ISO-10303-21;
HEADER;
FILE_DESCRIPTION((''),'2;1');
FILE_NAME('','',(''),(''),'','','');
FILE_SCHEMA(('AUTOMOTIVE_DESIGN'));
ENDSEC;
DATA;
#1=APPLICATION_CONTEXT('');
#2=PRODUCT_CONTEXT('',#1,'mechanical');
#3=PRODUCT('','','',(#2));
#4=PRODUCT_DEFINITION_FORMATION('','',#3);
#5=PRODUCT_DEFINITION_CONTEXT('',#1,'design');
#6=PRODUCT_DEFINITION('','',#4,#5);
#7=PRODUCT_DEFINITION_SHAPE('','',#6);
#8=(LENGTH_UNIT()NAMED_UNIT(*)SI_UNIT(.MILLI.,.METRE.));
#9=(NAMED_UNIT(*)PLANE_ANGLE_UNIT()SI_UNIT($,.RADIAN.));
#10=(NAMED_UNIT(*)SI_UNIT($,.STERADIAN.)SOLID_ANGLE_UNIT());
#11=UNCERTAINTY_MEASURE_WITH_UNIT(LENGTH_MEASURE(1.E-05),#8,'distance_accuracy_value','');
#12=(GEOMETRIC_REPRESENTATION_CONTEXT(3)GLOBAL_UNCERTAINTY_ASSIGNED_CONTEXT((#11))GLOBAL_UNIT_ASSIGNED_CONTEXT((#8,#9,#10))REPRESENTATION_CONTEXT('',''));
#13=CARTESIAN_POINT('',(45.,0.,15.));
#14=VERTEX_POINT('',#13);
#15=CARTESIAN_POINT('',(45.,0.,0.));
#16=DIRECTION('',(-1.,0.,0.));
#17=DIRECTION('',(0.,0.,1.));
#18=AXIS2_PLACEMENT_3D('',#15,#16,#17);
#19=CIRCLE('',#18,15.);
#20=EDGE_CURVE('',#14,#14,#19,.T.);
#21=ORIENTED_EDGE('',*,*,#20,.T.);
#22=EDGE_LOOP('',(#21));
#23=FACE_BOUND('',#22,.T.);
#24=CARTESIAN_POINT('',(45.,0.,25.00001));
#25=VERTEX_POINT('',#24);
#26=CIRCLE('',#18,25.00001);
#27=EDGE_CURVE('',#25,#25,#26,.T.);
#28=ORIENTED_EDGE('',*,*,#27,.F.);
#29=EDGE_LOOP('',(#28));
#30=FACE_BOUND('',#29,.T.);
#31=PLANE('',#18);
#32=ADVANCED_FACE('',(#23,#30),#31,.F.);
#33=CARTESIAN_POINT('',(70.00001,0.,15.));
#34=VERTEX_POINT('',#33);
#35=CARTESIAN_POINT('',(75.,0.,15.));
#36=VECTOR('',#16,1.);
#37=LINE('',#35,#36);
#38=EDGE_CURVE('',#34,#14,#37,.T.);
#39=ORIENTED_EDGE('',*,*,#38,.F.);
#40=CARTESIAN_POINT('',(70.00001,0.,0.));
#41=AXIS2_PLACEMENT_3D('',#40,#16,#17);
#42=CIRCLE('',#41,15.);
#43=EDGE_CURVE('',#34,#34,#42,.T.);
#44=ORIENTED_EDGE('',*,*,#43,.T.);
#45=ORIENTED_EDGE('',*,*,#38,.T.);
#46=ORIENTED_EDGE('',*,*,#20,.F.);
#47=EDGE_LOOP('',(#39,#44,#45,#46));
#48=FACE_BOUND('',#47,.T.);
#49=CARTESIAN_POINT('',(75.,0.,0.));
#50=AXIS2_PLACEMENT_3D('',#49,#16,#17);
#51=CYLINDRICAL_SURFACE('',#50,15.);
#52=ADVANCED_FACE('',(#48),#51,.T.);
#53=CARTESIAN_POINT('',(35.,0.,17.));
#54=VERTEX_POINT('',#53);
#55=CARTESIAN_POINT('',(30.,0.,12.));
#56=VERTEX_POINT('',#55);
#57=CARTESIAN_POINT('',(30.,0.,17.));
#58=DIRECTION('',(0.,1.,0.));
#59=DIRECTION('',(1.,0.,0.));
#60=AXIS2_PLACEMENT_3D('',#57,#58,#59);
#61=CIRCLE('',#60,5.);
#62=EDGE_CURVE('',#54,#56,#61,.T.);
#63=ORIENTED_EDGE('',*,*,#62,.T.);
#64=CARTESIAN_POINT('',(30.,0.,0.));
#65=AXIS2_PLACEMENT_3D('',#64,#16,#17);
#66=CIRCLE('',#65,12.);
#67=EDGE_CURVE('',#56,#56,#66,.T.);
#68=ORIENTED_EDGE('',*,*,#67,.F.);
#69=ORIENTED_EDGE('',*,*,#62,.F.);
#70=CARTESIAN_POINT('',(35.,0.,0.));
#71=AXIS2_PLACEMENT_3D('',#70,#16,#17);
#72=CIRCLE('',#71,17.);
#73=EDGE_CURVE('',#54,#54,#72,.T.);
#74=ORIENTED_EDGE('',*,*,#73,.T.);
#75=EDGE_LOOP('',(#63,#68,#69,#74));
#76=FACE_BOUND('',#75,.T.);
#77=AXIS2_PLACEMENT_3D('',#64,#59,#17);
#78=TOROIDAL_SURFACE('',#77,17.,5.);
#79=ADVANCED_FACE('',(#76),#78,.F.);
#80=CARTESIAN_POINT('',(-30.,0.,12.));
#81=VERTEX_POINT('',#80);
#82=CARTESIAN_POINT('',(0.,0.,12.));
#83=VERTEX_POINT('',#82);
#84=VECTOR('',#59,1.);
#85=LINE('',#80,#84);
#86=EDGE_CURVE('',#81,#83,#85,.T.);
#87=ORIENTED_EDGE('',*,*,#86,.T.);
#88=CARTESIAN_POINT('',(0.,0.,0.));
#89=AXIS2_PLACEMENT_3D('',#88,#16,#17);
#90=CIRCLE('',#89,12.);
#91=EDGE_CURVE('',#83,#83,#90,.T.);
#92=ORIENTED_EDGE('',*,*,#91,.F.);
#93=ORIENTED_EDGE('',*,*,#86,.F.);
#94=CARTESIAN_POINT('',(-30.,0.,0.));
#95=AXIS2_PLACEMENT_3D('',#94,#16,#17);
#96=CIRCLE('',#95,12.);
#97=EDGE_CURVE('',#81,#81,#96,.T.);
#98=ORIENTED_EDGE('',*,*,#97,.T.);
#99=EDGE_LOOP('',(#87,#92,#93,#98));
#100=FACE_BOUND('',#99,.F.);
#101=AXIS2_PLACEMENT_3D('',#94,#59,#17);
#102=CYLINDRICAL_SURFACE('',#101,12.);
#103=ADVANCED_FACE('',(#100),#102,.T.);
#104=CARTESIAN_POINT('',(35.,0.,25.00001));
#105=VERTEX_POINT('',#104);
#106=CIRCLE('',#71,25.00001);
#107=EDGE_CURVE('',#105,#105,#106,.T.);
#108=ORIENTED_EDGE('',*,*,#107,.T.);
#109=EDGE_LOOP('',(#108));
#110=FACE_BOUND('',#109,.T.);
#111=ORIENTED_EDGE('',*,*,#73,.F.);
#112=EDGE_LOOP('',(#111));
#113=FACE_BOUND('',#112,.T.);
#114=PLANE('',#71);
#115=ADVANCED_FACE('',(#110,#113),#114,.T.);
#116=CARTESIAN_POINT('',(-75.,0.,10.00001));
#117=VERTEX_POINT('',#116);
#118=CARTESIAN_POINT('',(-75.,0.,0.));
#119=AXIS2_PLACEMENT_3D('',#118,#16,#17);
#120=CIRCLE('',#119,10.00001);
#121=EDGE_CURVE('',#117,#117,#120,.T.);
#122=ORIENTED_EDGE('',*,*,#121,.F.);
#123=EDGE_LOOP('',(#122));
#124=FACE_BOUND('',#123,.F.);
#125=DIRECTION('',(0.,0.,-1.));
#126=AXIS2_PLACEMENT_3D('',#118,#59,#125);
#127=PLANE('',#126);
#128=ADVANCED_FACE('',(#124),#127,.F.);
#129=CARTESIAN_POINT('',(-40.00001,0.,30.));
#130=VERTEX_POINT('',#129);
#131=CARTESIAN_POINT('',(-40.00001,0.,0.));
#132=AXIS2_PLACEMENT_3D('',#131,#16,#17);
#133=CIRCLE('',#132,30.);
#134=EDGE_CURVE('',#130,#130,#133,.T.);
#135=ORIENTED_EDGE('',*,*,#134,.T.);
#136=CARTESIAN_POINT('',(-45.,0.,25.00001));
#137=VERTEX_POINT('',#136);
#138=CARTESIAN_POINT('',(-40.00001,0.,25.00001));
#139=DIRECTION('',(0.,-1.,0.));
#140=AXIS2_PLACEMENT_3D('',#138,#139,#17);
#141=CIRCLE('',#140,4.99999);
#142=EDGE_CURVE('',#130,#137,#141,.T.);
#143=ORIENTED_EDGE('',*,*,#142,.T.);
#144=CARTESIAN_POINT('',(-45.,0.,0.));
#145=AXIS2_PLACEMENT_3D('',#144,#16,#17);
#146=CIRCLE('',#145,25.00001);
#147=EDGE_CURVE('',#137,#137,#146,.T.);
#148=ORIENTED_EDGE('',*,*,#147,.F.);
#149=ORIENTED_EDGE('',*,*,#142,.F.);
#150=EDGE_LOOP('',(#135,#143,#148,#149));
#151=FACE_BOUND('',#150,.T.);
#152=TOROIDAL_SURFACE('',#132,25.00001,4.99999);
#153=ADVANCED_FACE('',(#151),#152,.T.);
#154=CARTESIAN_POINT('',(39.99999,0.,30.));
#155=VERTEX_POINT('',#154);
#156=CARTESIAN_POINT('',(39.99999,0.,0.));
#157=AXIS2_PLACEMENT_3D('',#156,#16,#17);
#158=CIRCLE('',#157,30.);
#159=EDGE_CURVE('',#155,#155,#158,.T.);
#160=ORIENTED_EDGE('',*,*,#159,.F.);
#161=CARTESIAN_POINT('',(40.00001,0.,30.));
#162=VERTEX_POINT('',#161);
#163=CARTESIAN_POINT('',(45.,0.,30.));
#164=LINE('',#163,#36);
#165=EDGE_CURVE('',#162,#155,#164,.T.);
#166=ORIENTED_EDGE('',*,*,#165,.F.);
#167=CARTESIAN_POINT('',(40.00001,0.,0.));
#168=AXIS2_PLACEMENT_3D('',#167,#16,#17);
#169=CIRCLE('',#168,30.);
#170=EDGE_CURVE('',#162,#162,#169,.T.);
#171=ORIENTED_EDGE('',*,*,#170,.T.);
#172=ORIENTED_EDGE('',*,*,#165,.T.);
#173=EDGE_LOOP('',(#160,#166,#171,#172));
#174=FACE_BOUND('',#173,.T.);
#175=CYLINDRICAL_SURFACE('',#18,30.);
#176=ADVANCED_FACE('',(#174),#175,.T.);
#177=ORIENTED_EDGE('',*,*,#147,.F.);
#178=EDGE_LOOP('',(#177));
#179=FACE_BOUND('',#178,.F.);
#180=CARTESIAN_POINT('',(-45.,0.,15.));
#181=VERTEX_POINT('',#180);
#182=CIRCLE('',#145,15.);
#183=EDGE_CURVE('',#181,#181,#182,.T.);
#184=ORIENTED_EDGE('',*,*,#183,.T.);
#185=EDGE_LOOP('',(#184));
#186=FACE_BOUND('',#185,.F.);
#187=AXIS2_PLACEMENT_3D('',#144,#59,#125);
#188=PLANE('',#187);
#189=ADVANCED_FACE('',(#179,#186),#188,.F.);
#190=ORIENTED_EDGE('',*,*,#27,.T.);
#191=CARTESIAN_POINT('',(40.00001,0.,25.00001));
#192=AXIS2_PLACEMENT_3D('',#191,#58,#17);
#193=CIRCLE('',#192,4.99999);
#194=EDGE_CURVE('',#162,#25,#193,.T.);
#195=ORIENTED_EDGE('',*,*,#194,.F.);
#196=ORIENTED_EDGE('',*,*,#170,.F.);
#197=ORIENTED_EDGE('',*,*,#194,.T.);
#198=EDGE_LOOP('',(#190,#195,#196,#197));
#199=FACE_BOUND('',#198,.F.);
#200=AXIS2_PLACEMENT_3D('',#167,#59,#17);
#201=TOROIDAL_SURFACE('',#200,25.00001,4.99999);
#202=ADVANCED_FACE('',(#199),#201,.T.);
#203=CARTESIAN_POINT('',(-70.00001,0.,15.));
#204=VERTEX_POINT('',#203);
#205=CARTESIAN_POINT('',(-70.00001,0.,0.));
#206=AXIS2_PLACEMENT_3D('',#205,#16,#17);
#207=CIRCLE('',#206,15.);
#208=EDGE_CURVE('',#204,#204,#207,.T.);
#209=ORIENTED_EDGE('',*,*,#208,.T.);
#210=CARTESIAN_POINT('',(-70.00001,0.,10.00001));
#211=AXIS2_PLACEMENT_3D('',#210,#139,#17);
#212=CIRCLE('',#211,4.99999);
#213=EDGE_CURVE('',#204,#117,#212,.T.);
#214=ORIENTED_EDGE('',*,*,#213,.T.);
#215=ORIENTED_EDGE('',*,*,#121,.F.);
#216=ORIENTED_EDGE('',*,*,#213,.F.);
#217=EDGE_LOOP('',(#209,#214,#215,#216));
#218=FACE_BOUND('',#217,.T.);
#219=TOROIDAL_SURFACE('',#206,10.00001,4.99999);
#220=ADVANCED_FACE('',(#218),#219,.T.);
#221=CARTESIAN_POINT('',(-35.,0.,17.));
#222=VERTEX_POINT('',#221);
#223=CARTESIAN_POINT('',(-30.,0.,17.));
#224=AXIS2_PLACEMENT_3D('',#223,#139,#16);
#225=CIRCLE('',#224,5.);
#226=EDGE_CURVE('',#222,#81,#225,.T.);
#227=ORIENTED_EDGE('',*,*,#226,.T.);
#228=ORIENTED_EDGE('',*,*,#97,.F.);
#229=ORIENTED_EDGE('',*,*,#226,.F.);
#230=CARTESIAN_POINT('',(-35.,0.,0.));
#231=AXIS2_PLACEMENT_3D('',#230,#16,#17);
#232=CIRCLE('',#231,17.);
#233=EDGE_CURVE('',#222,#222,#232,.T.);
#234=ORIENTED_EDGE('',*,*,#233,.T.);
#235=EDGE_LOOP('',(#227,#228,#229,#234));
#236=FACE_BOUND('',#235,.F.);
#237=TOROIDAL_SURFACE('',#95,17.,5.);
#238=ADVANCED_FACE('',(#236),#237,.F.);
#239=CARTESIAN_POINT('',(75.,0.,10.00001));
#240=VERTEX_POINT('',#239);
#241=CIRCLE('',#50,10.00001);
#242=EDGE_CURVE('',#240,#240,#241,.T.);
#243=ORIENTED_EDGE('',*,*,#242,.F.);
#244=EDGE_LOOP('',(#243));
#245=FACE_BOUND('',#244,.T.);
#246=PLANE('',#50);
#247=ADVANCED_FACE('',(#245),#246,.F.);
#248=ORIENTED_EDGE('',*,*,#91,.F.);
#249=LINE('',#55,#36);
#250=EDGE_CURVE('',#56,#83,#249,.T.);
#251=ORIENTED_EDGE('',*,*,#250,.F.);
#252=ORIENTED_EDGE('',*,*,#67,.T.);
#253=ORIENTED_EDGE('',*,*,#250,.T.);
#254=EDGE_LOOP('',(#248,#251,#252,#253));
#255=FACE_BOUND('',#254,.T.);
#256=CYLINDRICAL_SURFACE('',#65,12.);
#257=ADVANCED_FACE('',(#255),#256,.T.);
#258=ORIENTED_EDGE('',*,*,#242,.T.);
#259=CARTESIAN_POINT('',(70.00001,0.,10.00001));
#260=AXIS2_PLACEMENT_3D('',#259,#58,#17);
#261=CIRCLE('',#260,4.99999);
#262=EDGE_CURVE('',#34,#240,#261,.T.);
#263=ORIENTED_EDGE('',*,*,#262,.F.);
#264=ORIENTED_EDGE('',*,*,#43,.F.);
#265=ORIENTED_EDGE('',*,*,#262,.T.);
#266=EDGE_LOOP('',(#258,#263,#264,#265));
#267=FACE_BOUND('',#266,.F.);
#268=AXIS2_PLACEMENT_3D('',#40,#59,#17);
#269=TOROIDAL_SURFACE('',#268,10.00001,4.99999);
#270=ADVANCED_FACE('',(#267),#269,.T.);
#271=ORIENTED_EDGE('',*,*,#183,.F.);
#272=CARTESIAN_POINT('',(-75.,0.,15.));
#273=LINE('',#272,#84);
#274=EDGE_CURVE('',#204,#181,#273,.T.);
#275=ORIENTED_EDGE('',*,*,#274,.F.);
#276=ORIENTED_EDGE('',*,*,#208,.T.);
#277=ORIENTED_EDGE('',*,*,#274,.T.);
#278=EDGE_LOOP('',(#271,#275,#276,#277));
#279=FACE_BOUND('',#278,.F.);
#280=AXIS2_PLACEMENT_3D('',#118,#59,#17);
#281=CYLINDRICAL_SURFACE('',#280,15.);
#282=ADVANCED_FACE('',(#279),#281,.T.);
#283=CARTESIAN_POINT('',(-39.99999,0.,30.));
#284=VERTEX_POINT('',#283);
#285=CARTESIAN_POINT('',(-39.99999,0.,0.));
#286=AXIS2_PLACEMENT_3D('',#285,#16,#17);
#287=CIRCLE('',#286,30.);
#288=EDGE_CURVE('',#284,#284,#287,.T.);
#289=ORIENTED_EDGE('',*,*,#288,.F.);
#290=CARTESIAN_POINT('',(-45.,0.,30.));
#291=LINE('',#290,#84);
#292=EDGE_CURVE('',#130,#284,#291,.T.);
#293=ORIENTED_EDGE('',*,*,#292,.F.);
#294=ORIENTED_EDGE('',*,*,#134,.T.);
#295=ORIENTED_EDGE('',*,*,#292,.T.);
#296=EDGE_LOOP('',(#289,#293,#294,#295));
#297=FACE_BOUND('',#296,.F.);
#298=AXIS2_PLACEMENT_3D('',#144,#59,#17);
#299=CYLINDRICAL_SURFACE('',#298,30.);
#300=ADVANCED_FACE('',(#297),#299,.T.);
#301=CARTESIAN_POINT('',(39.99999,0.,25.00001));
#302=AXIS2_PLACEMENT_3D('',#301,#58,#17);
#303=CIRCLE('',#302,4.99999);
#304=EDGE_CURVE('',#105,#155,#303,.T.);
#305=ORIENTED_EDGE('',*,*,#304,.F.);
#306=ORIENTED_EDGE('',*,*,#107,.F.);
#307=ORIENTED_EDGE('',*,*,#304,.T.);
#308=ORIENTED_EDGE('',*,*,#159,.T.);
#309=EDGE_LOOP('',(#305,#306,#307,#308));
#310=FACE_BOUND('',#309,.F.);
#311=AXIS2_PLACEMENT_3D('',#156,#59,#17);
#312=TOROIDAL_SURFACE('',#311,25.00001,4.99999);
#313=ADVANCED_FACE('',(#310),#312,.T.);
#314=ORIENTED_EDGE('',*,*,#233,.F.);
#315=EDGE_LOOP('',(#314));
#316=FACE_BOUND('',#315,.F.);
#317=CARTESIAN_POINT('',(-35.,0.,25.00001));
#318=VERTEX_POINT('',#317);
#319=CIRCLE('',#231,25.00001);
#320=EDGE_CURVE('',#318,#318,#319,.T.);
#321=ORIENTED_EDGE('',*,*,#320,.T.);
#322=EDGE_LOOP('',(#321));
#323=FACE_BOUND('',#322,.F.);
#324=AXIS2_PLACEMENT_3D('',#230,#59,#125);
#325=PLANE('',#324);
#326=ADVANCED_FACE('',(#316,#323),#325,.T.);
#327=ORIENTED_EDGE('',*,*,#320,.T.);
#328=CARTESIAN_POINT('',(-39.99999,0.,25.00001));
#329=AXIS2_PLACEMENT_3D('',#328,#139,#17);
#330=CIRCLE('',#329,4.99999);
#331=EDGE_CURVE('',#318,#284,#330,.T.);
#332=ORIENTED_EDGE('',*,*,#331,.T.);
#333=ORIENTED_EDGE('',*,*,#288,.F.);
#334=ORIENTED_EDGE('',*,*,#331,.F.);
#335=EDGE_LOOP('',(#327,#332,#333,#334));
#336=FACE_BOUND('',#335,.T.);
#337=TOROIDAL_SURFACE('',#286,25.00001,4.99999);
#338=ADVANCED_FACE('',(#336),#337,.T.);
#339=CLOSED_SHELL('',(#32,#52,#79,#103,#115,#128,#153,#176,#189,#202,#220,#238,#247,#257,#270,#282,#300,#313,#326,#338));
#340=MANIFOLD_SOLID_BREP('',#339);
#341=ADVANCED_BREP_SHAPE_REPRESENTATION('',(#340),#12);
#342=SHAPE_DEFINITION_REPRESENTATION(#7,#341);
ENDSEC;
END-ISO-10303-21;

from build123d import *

# Parameters (mm, degrees)
F3_R = 4.99999


# Not quite as in the source:
# - a fillet or chamfer is up to 0.001 mm smaller than in the source, because OpenCascade refuses the exact size


with BuildPart() as f1:
    # F0 (on Front) → F1 (revolve)
    with BuildSketch(Plane.XZ):
        with BuildLine():
            Line((30, 12), (0, 12))
            Line((0, 12), (0, 0))
            Line((0, 0), (75, 0))
            Line((75, 0), (75, 15))
            Line((75, 15), (45, 15))
            Line((45, 15), (45, 30))
            Line((45, 30), (35, 30))
            Line((35, 30), (35, 17))
            ThreePointArc((35, 17), (33.5355339059, 13.4644660941), (30, 12))
        make_face()
    revolve(axis=Axis((37.5, 0, 0), (-1, 0, 0)))

    # F2: F1 across face


with BuildPart() as f1_1:
    add(f1.part)
    add(f1.part.mirror(Plane(origin=(0, 0, 0), x_dir=(0, -1, 0), z_dir=(-1, 0, 0))))

    # F3 (radius 5 in the source; OpenCascade refuses exactly that, so slightly less here)
    f3_edges = [f1_1.edges().sort_by_distance(p)[0] for p in [
        (75, 0, -15),
        (-75, 0, -15),
        (-35, 0, -30),
        (-45, 0, -30),
        (45, 0, -30),
        (35, 0, -30),
        (30, 0, -12),
        (0, 0, 12),
        (-30, 0, -12),
    ]]
    fillet(f3_edges, radius=F3_R)


solid = f1_1.part
